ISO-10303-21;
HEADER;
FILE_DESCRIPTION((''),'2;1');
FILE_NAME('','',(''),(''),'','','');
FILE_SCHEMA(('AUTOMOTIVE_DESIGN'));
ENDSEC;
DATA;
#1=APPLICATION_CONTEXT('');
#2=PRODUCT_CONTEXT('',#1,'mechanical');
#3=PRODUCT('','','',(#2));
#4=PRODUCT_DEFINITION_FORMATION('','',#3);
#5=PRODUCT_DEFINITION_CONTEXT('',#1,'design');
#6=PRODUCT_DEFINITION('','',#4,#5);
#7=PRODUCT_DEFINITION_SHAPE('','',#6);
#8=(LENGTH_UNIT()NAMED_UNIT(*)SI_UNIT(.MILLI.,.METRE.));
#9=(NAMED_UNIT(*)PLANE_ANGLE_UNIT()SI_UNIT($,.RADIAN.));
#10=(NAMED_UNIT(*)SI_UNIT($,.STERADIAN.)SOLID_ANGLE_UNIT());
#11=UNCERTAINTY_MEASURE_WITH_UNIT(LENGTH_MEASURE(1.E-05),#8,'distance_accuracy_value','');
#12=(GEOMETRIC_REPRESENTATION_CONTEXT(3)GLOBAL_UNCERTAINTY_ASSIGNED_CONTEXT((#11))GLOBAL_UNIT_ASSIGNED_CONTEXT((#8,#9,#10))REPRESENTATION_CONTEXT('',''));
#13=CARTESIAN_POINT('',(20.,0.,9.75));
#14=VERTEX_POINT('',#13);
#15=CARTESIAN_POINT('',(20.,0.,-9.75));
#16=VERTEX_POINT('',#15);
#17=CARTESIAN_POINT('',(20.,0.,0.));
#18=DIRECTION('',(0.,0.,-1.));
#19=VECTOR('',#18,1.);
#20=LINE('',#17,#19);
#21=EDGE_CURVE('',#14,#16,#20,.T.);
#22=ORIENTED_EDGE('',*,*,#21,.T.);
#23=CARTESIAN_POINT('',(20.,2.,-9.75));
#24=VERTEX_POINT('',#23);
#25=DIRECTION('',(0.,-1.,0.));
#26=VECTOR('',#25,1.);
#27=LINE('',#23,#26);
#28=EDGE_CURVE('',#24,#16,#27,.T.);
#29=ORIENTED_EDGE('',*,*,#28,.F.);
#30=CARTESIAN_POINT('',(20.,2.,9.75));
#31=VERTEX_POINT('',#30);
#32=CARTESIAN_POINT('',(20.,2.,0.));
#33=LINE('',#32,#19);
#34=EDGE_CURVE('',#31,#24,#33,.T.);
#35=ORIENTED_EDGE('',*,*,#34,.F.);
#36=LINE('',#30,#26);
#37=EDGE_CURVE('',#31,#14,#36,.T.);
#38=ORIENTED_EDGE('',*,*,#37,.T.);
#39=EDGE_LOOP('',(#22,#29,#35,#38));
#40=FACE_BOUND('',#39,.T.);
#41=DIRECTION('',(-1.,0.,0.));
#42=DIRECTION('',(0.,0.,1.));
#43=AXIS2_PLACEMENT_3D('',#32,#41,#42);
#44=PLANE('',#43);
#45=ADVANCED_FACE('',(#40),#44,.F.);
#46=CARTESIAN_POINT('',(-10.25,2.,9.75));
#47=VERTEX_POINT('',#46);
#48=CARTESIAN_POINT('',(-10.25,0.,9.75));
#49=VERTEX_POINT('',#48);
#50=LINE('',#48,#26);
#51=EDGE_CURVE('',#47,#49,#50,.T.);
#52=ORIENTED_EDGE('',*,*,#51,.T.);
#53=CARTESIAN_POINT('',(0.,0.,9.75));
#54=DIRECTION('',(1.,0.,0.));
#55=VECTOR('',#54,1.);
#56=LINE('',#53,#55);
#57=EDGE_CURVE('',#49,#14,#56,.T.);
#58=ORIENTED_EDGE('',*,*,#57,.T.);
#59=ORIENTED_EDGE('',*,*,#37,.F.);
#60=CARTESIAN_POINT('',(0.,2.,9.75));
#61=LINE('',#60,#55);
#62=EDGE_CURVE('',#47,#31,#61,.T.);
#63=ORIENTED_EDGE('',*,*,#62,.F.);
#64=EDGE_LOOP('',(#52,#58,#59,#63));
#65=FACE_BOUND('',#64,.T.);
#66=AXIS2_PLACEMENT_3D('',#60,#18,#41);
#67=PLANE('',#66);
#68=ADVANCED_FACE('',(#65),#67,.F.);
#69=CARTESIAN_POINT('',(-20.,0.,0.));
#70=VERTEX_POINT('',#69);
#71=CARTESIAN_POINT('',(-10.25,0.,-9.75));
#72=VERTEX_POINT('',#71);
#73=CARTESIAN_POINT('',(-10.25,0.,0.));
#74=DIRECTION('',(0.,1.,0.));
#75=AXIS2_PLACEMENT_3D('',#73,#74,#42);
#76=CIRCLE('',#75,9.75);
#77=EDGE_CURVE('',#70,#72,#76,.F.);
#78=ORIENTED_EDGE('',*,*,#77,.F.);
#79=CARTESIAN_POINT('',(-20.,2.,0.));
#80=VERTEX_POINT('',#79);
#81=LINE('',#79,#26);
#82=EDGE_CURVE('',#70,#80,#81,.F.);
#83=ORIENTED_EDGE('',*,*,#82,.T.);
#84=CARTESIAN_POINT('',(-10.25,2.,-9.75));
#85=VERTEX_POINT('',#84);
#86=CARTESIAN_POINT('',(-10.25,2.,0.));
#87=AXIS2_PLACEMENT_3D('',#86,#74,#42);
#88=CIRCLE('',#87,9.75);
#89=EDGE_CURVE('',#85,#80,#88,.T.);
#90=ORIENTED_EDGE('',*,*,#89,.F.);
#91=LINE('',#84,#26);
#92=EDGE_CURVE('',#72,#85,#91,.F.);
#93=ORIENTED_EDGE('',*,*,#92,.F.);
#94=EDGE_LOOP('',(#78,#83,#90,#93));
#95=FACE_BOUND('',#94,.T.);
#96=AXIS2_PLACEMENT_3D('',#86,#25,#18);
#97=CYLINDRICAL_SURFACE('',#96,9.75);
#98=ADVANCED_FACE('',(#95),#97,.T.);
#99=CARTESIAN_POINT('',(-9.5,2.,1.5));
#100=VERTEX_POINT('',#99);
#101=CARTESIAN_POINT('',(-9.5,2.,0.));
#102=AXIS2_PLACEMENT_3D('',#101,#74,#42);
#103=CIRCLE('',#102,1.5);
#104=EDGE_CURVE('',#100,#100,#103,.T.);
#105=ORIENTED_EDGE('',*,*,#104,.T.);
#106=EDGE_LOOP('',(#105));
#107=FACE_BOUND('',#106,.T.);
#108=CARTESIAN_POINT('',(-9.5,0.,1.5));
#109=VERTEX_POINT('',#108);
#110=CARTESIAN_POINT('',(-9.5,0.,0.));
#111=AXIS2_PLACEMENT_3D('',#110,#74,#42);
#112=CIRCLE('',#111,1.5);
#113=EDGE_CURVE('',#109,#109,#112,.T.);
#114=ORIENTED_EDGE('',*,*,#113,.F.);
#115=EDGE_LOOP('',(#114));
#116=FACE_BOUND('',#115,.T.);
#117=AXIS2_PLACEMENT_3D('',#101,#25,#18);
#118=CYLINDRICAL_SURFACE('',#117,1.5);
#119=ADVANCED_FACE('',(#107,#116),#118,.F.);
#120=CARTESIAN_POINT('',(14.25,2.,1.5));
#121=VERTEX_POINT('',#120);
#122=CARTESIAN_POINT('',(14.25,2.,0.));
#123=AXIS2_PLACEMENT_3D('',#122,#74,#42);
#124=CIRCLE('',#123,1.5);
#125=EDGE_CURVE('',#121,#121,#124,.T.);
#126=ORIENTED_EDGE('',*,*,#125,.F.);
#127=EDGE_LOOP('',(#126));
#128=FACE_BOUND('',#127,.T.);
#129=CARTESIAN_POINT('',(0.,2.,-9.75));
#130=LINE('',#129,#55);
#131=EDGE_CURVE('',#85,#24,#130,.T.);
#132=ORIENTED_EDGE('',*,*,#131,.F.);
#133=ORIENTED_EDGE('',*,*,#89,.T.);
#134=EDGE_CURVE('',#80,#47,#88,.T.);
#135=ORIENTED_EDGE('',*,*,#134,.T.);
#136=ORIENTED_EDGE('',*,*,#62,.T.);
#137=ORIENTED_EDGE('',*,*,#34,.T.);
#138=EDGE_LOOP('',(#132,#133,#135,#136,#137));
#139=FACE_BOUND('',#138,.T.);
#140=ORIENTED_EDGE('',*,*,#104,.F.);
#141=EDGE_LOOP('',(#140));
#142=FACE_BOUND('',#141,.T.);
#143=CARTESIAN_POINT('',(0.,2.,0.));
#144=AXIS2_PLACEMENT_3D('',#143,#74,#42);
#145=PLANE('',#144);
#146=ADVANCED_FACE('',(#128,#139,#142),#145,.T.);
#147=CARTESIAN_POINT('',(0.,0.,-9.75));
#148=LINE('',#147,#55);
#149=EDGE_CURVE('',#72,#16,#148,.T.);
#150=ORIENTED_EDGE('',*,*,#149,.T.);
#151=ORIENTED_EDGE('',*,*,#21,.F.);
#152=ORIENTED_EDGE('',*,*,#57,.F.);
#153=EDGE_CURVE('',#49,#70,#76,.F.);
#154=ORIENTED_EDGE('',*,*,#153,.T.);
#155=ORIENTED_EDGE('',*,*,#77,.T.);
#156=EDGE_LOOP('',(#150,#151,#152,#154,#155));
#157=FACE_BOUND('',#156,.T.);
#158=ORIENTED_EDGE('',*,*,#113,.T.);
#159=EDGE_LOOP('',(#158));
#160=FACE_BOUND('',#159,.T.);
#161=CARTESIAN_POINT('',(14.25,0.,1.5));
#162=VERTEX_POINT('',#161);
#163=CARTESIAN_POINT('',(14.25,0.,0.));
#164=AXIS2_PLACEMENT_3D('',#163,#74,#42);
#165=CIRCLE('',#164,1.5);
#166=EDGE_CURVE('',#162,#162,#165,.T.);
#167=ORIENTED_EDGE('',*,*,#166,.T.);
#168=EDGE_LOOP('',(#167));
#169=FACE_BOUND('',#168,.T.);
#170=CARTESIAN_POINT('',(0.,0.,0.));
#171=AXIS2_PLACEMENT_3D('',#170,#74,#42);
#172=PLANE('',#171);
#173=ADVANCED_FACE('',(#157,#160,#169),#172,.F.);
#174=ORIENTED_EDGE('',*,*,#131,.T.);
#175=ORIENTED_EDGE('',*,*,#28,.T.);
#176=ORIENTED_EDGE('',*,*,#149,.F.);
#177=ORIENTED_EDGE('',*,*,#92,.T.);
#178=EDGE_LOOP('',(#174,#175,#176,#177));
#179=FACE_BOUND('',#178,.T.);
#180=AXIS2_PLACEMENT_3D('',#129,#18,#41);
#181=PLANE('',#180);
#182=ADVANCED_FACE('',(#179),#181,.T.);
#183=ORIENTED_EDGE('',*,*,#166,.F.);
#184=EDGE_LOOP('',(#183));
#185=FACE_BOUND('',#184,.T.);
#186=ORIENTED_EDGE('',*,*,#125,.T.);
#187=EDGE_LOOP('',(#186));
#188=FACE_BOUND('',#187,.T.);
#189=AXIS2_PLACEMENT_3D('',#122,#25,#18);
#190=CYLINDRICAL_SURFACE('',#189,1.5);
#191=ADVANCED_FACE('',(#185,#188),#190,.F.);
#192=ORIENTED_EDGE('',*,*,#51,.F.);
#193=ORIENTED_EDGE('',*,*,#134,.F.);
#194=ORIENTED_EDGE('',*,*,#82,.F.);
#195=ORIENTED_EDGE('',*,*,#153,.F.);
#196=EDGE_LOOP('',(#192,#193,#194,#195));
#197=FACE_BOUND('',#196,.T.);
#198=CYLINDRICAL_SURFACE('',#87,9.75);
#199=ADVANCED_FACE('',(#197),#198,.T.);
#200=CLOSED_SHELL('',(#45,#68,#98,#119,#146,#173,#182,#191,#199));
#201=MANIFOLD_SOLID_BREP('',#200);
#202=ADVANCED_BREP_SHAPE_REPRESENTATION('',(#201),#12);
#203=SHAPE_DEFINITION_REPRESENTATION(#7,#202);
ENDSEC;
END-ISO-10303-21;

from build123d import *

# Parameters (mm, degrees)
SKETCH1_W           = 40
SKETCH1_H           = 19.5
SKETCH1_R           = 1.5
BOSS_EXTRUDE1_DEPTH = 2
FILLET1_R           = 9.75


with BuildPart() as part:
    # Sketch1 → Boss-Extrude1 (new body)
    with BuildSketch(Plane(origin=(0, 0, 0), x_dir=(1, 0, 0), z_dir=(0, 1, 0))):
        Rectangle(SKETCH1_W, SKETCH1_H)
        with Locations(Location((-9.5, 0, 0), (0, 0, 270))):
            Circle(SKETCH1_R, mode=Mode.SUBTRACT)
        with Locations(Location((14.25, 0, 0), (0, 0, 270))):
            Circle(SKETCH1_R, mode=Mode.SUBTRACT)
    extrude(amount=BOSS_EXTRUDE1_DEPTH)

    # Fillet1
    fillet1_edges = [part.edges().sort_by_distance(p)[0] for p in [
        (-20, 1, -9.75),
        (-20, 1, 9.75),
    ]]
    fillet(fillet1_edges, radius=FILLET1_R - 0.0001)  # a hair under: the kernel refuses the full size


solid = part.part
